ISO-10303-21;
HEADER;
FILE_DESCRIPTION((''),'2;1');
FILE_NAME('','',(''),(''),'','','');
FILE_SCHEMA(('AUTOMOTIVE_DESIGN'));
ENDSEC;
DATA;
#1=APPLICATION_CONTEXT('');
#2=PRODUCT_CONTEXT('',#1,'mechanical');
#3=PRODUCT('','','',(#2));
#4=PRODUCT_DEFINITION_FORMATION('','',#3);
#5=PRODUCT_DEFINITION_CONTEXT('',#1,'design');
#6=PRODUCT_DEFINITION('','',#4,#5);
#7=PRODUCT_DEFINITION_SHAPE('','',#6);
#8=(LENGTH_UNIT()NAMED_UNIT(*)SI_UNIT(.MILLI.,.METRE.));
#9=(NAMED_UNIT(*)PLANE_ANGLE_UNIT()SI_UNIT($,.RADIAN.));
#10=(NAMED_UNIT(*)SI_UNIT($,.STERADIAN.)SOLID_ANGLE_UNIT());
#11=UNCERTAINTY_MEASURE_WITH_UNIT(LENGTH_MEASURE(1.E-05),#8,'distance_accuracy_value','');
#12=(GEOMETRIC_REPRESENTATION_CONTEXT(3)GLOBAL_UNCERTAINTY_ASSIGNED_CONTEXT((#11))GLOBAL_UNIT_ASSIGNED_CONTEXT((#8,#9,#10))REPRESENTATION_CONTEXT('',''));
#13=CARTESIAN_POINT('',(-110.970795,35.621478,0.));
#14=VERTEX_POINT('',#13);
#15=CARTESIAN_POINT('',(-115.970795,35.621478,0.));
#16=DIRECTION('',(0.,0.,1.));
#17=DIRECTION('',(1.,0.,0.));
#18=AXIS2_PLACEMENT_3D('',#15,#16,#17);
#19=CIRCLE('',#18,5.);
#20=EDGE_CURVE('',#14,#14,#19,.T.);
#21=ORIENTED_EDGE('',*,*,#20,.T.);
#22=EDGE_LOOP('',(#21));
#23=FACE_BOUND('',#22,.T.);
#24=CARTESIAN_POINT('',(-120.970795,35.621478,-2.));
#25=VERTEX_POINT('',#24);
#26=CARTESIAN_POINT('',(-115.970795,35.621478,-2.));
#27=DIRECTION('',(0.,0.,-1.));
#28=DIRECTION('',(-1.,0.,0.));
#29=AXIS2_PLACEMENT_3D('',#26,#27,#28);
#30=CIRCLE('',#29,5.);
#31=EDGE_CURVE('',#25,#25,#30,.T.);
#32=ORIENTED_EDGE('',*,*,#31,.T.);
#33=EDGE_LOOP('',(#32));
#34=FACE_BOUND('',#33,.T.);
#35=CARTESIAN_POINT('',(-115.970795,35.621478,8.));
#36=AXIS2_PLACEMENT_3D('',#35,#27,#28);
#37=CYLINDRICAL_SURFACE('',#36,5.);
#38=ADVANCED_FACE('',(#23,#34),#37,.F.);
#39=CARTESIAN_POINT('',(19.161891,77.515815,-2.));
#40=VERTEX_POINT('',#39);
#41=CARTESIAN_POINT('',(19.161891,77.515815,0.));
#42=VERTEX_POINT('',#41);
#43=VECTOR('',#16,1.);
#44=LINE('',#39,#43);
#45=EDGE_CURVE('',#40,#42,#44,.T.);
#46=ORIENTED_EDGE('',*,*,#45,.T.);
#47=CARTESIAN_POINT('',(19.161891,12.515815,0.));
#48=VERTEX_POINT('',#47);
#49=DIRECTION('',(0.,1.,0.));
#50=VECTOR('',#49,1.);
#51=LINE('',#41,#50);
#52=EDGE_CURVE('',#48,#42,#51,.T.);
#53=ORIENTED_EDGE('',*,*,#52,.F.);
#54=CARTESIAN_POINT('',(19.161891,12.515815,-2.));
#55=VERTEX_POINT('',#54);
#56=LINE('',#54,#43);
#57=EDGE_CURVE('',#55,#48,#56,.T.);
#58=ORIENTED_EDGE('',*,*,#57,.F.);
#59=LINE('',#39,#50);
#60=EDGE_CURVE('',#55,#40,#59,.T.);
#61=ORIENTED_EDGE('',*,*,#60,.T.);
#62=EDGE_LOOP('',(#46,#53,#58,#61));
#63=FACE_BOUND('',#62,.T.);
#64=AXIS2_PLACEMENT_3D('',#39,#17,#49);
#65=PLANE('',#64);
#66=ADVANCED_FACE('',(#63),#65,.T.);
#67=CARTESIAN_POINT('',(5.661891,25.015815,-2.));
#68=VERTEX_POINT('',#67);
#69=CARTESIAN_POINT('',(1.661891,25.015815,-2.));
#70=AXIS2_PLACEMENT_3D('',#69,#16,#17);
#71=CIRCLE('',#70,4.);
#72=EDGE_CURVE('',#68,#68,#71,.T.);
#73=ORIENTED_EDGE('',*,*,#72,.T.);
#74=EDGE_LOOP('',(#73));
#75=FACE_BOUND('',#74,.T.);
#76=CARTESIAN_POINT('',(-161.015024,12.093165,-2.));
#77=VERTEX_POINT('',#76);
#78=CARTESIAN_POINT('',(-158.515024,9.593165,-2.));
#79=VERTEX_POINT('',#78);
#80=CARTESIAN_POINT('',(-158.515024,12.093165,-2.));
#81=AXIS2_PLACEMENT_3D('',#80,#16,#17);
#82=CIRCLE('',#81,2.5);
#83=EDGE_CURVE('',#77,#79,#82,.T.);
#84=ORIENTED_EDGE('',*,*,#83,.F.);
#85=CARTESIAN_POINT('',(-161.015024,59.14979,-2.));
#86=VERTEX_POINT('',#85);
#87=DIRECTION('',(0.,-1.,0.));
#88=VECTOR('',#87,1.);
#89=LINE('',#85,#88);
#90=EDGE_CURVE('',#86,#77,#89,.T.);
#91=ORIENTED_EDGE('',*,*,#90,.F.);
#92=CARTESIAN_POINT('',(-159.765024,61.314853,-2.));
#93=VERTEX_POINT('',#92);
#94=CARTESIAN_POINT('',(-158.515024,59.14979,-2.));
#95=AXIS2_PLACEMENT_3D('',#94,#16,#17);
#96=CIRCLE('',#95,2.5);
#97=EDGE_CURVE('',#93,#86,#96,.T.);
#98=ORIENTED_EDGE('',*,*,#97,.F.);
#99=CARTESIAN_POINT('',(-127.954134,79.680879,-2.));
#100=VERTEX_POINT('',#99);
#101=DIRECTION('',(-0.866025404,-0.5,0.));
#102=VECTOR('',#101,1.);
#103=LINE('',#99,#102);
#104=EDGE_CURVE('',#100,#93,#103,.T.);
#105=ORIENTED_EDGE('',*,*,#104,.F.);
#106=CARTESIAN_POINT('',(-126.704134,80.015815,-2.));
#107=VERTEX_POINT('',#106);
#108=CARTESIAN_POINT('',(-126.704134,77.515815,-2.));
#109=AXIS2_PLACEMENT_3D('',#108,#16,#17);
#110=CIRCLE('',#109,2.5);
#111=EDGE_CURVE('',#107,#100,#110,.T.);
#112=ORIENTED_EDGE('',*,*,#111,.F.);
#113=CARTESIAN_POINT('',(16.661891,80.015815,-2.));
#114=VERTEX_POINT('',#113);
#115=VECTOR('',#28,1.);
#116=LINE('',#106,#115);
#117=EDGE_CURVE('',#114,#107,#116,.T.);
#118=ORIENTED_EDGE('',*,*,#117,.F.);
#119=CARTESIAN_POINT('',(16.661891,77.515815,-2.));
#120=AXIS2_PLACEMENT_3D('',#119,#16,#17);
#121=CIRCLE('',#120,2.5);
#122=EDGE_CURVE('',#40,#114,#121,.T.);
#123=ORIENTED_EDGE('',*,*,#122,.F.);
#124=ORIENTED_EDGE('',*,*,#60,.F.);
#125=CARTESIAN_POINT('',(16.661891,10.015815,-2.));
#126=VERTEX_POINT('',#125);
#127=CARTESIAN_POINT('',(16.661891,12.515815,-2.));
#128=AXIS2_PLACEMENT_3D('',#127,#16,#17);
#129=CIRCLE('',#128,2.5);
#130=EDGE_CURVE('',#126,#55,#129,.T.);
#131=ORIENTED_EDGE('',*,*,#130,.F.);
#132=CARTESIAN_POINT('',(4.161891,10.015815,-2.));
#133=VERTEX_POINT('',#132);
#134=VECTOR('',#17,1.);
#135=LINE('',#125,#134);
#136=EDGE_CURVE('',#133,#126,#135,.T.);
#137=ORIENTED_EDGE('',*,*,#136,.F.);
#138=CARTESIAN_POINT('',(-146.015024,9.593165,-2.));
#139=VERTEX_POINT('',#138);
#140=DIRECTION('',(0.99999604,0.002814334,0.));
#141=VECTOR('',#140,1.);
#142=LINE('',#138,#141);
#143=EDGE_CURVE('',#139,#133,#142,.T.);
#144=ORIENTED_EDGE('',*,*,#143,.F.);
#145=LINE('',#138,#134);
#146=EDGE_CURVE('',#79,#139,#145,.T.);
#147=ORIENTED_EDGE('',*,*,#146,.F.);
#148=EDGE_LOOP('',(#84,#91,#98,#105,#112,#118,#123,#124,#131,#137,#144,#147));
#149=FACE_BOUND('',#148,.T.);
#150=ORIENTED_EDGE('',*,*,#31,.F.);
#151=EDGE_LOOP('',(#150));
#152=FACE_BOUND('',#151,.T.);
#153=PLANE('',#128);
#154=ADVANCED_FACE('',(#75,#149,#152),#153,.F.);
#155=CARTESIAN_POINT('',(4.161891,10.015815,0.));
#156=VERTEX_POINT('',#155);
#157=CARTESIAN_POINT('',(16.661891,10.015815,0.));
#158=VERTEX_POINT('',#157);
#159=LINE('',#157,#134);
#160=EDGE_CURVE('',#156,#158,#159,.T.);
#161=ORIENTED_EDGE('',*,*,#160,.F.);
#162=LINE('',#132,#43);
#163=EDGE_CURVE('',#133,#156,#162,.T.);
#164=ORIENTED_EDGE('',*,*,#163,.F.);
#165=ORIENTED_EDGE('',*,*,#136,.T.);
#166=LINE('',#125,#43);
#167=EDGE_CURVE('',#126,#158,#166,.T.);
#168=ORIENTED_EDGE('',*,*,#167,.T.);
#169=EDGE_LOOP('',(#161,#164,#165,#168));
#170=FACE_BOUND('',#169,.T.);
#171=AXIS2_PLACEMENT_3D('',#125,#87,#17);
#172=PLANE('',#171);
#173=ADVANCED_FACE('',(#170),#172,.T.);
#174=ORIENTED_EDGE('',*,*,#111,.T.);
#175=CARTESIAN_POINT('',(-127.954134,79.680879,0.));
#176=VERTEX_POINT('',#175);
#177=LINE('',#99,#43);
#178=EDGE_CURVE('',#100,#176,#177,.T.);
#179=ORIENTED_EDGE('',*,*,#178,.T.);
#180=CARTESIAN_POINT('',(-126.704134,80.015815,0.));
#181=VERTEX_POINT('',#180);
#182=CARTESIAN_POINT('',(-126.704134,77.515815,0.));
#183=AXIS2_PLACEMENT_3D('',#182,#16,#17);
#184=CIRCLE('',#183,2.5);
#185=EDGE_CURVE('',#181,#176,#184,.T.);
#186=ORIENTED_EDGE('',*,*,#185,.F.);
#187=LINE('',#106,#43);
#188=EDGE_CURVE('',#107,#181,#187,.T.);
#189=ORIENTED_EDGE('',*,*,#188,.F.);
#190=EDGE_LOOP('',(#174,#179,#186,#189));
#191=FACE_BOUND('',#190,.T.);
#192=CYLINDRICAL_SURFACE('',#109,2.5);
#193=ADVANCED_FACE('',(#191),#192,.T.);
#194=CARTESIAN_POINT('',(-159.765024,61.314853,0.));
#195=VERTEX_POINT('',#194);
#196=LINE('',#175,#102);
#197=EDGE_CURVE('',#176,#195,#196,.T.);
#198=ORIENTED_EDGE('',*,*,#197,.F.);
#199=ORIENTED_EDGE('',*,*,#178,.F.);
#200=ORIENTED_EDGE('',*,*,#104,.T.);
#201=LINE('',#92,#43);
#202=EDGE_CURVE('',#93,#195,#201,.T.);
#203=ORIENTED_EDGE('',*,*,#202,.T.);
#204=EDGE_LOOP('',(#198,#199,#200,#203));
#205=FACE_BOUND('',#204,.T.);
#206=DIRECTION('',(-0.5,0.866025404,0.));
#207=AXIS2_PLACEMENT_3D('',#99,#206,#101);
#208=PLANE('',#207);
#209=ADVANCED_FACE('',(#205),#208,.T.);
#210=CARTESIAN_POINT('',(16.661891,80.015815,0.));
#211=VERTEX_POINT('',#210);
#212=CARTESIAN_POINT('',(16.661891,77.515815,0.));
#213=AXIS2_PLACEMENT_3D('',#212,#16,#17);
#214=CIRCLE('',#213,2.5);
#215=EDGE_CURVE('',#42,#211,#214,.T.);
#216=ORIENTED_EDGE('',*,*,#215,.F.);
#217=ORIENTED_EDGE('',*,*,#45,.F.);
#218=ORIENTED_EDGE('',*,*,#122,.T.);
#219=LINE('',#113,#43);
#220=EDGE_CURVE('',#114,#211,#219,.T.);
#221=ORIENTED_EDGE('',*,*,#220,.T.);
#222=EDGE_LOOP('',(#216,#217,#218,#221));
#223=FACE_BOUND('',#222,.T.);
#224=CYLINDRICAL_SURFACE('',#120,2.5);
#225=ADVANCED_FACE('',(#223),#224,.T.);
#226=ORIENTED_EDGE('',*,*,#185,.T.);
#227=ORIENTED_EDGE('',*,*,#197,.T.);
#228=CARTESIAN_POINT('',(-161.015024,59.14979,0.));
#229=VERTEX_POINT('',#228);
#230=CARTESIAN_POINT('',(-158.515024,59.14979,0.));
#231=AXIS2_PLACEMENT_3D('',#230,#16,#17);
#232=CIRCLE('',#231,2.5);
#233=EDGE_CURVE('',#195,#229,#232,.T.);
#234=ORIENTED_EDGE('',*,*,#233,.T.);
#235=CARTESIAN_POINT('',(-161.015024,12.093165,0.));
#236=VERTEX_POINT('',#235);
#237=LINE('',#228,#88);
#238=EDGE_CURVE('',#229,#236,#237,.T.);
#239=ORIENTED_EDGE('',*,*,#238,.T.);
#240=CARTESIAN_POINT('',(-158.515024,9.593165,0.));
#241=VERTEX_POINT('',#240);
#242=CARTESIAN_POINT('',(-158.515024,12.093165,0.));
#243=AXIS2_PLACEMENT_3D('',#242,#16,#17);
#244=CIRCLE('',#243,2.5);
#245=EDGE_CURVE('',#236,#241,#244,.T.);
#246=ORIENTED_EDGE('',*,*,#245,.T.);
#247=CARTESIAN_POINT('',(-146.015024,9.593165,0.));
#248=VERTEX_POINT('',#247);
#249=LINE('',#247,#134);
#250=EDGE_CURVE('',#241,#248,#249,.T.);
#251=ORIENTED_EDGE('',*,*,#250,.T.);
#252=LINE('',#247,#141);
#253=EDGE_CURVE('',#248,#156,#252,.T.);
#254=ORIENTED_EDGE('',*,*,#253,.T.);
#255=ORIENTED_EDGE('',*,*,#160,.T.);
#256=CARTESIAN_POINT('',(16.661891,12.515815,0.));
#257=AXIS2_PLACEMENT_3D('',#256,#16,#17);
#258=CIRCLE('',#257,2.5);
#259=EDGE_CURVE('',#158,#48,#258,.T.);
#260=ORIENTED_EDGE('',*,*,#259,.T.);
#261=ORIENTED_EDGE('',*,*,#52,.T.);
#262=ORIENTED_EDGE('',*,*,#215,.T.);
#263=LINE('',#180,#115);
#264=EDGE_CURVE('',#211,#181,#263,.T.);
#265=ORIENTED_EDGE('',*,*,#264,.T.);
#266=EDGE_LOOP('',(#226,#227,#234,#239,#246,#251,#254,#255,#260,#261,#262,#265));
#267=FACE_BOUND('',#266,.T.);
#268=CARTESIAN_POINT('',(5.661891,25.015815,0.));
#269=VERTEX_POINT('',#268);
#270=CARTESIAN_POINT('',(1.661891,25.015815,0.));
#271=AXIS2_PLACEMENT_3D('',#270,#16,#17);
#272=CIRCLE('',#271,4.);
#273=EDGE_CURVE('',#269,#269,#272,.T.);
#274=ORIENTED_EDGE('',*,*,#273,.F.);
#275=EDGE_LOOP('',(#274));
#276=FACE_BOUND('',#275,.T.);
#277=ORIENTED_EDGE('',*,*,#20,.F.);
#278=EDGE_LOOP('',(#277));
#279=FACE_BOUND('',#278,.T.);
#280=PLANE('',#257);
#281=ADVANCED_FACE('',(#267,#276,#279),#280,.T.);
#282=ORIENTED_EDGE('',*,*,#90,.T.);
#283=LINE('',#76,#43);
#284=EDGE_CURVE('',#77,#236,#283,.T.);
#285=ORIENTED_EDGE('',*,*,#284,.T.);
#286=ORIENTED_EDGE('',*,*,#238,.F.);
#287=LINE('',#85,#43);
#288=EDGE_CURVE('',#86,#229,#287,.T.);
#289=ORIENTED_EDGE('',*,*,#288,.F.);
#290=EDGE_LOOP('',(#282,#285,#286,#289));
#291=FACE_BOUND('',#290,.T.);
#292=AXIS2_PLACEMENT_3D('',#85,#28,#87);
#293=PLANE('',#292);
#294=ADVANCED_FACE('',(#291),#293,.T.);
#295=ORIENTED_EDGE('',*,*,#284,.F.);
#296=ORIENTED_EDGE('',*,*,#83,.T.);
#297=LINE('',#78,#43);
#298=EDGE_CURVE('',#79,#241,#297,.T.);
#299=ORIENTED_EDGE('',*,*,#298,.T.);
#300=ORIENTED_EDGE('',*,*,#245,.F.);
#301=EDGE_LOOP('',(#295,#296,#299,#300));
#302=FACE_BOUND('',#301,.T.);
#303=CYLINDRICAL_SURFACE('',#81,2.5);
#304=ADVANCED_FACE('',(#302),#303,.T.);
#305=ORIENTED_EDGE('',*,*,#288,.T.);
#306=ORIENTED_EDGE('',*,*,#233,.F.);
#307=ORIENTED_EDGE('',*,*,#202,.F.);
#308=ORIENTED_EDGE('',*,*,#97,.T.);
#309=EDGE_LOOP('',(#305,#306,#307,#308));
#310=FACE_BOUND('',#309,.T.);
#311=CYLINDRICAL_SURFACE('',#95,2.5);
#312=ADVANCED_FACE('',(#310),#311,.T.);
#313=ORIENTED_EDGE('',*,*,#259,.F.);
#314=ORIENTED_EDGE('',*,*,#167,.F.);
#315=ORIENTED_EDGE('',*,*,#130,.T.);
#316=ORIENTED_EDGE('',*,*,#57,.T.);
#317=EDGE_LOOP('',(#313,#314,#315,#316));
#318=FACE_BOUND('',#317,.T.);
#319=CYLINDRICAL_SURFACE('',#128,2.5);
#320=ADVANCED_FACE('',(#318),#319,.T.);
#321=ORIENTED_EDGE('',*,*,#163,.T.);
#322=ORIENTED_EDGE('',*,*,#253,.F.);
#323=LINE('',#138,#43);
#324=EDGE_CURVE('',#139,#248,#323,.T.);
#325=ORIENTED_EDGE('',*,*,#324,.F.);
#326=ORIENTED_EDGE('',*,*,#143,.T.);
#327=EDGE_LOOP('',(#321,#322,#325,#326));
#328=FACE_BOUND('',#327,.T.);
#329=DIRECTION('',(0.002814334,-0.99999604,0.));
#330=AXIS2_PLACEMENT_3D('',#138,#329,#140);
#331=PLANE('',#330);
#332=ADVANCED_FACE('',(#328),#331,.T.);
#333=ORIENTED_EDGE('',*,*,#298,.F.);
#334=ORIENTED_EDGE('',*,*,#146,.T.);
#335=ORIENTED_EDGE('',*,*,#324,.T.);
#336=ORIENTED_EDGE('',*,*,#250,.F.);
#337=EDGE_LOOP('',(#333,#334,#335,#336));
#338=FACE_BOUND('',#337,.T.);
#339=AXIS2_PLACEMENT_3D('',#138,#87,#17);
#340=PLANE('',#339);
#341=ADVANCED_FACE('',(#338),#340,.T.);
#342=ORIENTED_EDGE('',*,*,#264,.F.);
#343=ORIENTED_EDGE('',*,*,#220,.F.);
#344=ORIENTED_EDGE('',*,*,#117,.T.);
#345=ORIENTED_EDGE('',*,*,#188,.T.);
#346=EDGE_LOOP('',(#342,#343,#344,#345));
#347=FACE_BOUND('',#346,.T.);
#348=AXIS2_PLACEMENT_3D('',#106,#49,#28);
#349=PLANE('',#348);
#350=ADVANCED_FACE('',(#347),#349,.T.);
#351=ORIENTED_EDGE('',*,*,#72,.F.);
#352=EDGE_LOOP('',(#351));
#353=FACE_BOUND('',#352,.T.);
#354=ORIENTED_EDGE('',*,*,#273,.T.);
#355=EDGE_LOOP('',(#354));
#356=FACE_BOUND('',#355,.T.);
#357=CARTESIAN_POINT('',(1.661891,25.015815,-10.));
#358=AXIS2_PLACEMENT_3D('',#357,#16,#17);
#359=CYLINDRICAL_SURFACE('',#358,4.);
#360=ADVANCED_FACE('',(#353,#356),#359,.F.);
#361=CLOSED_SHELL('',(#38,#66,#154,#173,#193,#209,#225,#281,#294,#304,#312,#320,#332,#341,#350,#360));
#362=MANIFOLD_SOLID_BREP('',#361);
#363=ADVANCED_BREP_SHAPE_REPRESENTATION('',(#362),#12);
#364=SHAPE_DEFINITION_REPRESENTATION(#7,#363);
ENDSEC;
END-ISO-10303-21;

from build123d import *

# Parameters (mm, degrees)
BASE_FLANGE1_DEPTH = 2
SKETCH2_R          = 5
CUT_EXTRUDE1_DEPTH = 10
SKETCH4_R          = 4
CUT_EXTRUDE3_DEPTH = 10


# Sheet-metal steps are written as plain solids
with BuildPart() as part:
    # Sketch1 → Base-Flange1 (new body)
    with BuildSketch(Plane.XY):
        with BuildLine():
            Line((16.661890932, 10.015815157), (4.161890932, 10.015815157))
            Line((4.161890932, 10.015815157), (-146.015023604, 9.593165426))
            Line((-146.015023604, 9.593165426), (-158.515023604, 9.593165426))
            ThreePointArc((-158.515023604, 9.593165426), (-160.282790557, 10.325398473), (-161.015023604, 12.093165426))
            Line((-161.015023604, 12.093165426), (-161.015023604, 59.149789753))
            ThreePointArc((-161.015023604, 59.149789753), (-160.680087113, 60.399789753), (-159.765023604, 61.314853262))
            Line((-159.765023604, 61.314853262), (-127.954134471, 79.680878666))
            ThreePointArc((-127.954134471, 79.680878666), (-127.351182084, 79.930629722), (-126.704134471, 80.015815157))
            Line((-126.704134471, 80.015815157), (16.661890932, 80.015815157))
            ThreePointArc((16.661890932, 80.015815157), (18.429657885, 79.28358211), (19.161890932, 77.515815157))
            Line((19.161890932, 77.515815157), (19.161890932, 12.515815157))
            ThreePointArc((19.161890932, 12.515815157), (18.429657885, 10.748048204), (16.661890932, 10.015815157))
        make_face()
    extrude(amount=-BASE_FLANGE1_DEPTH)

    # Sketch2 → Cut-Extrude1 (cut)
    with BuildSketch(Plane(origin=(0, 0, -2), x_dir=(-1, 0, 0), z_dir=(0, 0, -1))):
        with Locations((115.97079497, 35.621477589)):
            Circle(SKETCH2_R)
    extrude(amount=-CUT_EXTRUDE1_DEPTH, mode=Mode.SUBTRACT)

    # Sketch4 → Cut-Extrude3 (cut)
    with BuildSketch(Plane.XY):
        with Locations((1.661890932, 25.015815157)):
            Circle(SKETCH4_R)
    extrude(amount=-CUT_EXTRUDE3_DEPTH, mode=Mode.SUBTRACT)


solid = part.part
